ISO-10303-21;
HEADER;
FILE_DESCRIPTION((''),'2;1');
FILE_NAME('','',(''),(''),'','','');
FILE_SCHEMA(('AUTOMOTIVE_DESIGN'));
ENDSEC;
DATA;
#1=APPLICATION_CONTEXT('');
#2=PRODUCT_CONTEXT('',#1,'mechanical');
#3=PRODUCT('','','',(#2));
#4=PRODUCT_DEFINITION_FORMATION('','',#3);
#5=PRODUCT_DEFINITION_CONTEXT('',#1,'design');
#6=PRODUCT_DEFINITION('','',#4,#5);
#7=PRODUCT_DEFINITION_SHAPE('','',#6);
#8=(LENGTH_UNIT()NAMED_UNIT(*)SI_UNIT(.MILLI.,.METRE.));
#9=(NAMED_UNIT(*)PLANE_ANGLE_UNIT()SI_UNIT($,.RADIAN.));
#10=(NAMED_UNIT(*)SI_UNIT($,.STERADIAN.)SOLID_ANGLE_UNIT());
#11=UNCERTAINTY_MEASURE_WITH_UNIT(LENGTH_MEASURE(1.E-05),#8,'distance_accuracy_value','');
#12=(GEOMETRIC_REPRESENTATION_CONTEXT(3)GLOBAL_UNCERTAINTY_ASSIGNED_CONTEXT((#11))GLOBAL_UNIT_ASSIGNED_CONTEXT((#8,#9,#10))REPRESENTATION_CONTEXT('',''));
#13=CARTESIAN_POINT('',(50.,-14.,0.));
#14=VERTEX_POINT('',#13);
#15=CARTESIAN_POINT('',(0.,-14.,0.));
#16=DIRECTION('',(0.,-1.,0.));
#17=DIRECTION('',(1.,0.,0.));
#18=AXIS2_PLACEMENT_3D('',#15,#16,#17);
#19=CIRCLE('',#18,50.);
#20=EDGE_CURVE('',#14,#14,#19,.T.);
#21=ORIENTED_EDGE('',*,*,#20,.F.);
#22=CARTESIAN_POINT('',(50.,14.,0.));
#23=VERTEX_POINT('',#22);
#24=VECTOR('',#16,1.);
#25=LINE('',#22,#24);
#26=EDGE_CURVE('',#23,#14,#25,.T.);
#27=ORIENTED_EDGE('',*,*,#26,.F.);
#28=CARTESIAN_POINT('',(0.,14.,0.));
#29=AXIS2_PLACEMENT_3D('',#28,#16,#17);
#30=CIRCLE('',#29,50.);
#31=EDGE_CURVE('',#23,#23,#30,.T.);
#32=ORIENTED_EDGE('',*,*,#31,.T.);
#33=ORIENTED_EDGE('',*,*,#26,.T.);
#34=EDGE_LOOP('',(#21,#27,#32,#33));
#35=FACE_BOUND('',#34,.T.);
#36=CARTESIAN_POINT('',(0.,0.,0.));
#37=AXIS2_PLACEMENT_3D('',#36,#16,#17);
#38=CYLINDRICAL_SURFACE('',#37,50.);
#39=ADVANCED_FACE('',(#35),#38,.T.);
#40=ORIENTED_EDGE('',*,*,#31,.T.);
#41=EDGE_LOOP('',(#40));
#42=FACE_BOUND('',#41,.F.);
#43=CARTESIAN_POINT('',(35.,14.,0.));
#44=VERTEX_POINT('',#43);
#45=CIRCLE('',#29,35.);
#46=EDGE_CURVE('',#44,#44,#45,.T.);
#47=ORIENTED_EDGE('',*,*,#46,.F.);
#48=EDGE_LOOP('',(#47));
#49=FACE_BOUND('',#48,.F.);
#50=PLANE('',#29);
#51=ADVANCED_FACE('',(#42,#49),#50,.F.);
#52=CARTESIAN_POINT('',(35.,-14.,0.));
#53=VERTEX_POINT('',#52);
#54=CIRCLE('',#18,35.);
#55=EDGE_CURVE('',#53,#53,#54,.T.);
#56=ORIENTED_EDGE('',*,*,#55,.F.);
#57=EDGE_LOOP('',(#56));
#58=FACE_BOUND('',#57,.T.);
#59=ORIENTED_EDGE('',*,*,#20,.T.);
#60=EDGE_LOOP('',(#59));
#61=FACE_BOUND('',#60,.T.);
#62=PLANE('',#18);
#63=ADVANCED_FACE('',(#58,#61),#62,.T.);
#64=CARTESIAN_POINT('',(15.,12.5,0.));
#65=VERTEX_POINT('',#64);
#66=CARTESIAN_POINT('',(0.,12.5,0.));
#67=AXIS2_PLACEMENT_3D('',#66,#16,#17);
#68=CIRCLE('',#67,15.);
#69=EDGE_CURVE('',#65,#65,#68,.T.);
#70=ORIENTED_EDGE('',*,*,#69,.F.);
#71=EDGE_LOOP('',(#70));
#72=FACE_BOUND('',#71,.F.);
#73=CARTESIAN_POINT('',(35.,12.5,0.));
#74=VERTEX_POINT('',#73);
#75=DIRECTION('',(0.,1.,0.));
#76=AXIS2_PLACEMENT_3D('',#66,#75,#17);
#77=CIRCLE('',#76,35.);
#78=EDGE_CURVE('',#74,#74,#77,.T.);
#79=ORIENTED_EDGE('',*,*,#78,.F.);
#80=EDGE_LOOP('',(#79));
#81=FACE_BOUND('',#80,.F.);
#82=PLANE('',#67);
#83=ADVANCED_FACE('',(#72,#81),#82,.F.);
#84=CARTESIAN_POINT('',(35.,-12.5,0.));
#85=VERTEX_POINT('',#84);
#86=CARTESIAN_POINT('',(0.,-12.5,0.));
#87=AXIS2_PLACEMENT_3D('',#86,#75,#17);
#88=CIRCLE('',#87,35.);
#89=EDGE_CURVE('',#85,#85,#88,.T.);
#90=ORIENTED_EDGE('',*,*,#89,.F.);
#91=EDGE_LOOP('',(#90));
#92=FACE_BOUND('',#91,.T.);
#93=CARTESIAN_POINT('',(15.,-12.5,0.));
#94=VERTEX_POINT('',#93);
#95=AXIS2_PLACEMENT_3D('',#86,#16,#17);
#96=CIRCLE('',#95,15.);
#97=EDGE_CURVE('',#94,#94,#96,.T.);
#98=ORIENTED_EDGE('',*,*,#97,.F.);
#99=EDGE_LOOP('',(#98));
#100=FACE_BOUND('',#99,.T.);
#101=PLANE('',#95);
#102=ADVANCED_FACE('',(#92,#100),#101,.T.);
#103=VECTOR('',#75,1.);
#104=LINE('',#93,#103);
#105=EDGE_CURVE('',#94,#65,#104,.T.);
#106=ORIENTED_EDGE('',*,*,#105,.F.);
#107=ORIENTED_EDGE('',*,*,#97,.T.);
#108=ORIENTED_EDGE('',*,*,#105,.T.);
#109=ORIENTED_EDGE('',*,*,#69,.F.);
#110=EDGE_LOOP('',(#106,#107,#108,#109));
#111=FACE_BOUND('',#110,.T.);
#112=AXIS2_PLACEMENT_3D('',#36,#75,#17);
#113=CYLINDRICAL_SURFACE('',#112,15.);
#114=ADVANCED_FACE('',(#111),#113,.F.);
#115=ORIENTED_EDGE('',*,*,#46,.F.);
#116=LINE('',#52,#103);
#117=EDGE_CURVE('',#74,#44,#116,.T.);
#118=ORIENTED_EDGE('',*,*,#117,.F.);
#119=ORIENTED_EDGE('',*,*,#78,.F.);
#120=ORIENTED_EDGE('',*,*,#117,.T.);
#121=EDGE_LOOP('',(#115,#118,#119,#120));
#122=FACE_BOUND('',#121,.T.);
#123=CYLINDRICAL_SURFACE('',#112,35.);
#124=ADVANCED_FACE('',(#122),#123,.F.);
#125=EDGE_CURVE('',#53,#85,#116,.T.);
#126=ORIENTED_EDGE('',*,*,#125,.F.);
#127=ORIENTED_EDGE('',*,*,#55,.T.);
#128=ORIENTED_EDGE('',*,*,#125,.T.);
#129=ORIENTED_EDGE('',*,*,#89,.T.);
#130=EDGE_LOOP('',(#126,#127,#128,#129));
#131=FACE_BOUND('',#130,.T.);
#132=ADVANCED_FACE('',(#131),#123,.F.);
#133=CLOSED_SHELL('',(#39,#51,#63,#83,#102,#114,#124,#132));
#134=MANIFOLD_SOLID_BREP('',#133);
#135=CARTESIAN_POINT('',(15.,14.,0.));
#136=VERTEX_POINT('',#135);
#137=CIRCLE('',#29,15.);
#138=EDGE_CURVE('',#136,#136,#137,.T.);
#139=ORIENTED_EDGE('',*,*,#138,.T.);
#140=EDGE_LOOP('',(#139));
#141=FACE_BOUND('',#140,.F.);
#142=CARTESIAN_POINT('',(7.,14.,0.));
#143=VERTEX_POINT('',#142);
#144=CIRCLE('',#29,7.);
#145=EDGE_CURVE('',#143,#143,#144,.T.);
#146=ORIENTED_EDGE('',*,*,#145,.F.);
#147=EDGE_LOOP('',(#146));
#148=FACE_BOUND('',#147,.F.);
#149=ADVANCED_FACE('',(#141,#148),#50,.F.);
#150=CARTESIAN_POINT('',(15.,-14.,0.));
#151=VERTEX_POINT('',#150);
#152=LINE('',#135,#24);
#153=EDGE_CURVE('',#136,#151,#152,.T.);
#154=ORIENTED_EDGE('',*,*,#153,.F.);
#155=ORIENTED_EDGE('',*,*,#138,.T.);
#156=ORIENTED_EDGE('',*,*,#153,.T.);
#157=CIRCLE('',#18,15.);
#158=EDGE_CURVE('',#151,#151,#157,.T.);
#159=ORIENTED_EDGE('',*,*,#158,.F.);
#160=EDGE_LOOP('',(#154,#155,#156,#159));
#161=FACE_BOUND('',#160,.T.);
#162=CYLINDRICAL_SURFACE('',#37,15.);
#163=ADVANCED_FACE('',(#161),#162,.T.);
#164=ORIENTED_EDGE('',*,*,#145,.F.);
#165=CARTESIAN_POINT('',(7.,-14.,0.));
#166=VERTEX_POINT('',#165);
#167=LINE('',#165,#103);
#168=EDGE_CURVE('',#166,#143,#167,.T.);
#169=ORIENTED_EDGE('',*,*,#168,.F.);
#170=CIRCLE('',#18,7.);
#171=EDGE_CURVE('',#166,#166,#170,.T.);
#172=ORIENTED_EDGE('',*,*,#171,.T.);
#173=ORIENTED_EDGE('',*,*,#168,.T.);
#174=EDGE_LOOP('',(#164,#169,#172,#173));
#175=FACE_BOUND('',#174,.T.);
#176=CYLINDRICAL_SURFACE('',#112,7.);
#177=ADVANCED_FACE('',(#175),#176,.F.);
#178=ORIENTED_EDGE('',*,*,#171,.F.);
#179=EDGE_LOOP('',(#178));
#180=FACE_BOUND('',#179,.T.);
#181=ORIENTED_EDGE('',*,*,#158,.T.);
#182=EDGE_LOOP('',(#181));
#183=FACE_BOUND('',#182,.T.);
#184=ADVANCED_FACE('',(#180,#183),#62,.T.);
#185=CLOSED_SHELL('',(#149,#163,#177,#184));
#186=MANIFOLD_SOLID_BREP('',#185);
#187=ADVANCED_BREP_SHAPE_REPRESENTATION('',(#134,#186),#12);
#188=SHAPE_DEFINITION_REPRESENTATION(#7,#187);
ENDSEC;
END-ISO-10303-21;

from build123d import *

# Parameters (mm, degrees)
F0_R     = 15
F0_R_2   = 7
F1_DEPTH = 14
F0_R_3   = 50
F0_R_4   = 35
F2_DEPTH = 12.5


with BuildPart() as f1:
    # F0 (on Front) → F1 (new body, symmetric)
    with BuildSketch(Plane.XZ):
        Circle(F0_R)
        Circle(F0_R_2, mode=Mode.SUBTRACT)
    extrude(amount=F1_DEPTH, both=True)


with BuildPart() as f1b:
    # F0 (on Front) → F1, piece 2 (new body, symmetric)
    with BuildSketch(Plane.XZ):
        Circle(F0_R_3)
        Circle(F0_R_4, mode=Mode.SUBTRACT)
    extrude(amount=F1_DEPTH, both=True)

    # F0 (on Front) → F2 (join, symmetric)
    with BuildSketch(Plane.XZ):
        Circle(F0_R_3)
        Circle(F0_R_4, mode=Mode.SUBTRACT)
        Circle(F0_R_4)
        Circle(F0_R, mode=Mode.SUBTRACT)
    extrude(amount=F2_DEPTH, both=True)


solid = Compound([f1.part, f1b.part])
